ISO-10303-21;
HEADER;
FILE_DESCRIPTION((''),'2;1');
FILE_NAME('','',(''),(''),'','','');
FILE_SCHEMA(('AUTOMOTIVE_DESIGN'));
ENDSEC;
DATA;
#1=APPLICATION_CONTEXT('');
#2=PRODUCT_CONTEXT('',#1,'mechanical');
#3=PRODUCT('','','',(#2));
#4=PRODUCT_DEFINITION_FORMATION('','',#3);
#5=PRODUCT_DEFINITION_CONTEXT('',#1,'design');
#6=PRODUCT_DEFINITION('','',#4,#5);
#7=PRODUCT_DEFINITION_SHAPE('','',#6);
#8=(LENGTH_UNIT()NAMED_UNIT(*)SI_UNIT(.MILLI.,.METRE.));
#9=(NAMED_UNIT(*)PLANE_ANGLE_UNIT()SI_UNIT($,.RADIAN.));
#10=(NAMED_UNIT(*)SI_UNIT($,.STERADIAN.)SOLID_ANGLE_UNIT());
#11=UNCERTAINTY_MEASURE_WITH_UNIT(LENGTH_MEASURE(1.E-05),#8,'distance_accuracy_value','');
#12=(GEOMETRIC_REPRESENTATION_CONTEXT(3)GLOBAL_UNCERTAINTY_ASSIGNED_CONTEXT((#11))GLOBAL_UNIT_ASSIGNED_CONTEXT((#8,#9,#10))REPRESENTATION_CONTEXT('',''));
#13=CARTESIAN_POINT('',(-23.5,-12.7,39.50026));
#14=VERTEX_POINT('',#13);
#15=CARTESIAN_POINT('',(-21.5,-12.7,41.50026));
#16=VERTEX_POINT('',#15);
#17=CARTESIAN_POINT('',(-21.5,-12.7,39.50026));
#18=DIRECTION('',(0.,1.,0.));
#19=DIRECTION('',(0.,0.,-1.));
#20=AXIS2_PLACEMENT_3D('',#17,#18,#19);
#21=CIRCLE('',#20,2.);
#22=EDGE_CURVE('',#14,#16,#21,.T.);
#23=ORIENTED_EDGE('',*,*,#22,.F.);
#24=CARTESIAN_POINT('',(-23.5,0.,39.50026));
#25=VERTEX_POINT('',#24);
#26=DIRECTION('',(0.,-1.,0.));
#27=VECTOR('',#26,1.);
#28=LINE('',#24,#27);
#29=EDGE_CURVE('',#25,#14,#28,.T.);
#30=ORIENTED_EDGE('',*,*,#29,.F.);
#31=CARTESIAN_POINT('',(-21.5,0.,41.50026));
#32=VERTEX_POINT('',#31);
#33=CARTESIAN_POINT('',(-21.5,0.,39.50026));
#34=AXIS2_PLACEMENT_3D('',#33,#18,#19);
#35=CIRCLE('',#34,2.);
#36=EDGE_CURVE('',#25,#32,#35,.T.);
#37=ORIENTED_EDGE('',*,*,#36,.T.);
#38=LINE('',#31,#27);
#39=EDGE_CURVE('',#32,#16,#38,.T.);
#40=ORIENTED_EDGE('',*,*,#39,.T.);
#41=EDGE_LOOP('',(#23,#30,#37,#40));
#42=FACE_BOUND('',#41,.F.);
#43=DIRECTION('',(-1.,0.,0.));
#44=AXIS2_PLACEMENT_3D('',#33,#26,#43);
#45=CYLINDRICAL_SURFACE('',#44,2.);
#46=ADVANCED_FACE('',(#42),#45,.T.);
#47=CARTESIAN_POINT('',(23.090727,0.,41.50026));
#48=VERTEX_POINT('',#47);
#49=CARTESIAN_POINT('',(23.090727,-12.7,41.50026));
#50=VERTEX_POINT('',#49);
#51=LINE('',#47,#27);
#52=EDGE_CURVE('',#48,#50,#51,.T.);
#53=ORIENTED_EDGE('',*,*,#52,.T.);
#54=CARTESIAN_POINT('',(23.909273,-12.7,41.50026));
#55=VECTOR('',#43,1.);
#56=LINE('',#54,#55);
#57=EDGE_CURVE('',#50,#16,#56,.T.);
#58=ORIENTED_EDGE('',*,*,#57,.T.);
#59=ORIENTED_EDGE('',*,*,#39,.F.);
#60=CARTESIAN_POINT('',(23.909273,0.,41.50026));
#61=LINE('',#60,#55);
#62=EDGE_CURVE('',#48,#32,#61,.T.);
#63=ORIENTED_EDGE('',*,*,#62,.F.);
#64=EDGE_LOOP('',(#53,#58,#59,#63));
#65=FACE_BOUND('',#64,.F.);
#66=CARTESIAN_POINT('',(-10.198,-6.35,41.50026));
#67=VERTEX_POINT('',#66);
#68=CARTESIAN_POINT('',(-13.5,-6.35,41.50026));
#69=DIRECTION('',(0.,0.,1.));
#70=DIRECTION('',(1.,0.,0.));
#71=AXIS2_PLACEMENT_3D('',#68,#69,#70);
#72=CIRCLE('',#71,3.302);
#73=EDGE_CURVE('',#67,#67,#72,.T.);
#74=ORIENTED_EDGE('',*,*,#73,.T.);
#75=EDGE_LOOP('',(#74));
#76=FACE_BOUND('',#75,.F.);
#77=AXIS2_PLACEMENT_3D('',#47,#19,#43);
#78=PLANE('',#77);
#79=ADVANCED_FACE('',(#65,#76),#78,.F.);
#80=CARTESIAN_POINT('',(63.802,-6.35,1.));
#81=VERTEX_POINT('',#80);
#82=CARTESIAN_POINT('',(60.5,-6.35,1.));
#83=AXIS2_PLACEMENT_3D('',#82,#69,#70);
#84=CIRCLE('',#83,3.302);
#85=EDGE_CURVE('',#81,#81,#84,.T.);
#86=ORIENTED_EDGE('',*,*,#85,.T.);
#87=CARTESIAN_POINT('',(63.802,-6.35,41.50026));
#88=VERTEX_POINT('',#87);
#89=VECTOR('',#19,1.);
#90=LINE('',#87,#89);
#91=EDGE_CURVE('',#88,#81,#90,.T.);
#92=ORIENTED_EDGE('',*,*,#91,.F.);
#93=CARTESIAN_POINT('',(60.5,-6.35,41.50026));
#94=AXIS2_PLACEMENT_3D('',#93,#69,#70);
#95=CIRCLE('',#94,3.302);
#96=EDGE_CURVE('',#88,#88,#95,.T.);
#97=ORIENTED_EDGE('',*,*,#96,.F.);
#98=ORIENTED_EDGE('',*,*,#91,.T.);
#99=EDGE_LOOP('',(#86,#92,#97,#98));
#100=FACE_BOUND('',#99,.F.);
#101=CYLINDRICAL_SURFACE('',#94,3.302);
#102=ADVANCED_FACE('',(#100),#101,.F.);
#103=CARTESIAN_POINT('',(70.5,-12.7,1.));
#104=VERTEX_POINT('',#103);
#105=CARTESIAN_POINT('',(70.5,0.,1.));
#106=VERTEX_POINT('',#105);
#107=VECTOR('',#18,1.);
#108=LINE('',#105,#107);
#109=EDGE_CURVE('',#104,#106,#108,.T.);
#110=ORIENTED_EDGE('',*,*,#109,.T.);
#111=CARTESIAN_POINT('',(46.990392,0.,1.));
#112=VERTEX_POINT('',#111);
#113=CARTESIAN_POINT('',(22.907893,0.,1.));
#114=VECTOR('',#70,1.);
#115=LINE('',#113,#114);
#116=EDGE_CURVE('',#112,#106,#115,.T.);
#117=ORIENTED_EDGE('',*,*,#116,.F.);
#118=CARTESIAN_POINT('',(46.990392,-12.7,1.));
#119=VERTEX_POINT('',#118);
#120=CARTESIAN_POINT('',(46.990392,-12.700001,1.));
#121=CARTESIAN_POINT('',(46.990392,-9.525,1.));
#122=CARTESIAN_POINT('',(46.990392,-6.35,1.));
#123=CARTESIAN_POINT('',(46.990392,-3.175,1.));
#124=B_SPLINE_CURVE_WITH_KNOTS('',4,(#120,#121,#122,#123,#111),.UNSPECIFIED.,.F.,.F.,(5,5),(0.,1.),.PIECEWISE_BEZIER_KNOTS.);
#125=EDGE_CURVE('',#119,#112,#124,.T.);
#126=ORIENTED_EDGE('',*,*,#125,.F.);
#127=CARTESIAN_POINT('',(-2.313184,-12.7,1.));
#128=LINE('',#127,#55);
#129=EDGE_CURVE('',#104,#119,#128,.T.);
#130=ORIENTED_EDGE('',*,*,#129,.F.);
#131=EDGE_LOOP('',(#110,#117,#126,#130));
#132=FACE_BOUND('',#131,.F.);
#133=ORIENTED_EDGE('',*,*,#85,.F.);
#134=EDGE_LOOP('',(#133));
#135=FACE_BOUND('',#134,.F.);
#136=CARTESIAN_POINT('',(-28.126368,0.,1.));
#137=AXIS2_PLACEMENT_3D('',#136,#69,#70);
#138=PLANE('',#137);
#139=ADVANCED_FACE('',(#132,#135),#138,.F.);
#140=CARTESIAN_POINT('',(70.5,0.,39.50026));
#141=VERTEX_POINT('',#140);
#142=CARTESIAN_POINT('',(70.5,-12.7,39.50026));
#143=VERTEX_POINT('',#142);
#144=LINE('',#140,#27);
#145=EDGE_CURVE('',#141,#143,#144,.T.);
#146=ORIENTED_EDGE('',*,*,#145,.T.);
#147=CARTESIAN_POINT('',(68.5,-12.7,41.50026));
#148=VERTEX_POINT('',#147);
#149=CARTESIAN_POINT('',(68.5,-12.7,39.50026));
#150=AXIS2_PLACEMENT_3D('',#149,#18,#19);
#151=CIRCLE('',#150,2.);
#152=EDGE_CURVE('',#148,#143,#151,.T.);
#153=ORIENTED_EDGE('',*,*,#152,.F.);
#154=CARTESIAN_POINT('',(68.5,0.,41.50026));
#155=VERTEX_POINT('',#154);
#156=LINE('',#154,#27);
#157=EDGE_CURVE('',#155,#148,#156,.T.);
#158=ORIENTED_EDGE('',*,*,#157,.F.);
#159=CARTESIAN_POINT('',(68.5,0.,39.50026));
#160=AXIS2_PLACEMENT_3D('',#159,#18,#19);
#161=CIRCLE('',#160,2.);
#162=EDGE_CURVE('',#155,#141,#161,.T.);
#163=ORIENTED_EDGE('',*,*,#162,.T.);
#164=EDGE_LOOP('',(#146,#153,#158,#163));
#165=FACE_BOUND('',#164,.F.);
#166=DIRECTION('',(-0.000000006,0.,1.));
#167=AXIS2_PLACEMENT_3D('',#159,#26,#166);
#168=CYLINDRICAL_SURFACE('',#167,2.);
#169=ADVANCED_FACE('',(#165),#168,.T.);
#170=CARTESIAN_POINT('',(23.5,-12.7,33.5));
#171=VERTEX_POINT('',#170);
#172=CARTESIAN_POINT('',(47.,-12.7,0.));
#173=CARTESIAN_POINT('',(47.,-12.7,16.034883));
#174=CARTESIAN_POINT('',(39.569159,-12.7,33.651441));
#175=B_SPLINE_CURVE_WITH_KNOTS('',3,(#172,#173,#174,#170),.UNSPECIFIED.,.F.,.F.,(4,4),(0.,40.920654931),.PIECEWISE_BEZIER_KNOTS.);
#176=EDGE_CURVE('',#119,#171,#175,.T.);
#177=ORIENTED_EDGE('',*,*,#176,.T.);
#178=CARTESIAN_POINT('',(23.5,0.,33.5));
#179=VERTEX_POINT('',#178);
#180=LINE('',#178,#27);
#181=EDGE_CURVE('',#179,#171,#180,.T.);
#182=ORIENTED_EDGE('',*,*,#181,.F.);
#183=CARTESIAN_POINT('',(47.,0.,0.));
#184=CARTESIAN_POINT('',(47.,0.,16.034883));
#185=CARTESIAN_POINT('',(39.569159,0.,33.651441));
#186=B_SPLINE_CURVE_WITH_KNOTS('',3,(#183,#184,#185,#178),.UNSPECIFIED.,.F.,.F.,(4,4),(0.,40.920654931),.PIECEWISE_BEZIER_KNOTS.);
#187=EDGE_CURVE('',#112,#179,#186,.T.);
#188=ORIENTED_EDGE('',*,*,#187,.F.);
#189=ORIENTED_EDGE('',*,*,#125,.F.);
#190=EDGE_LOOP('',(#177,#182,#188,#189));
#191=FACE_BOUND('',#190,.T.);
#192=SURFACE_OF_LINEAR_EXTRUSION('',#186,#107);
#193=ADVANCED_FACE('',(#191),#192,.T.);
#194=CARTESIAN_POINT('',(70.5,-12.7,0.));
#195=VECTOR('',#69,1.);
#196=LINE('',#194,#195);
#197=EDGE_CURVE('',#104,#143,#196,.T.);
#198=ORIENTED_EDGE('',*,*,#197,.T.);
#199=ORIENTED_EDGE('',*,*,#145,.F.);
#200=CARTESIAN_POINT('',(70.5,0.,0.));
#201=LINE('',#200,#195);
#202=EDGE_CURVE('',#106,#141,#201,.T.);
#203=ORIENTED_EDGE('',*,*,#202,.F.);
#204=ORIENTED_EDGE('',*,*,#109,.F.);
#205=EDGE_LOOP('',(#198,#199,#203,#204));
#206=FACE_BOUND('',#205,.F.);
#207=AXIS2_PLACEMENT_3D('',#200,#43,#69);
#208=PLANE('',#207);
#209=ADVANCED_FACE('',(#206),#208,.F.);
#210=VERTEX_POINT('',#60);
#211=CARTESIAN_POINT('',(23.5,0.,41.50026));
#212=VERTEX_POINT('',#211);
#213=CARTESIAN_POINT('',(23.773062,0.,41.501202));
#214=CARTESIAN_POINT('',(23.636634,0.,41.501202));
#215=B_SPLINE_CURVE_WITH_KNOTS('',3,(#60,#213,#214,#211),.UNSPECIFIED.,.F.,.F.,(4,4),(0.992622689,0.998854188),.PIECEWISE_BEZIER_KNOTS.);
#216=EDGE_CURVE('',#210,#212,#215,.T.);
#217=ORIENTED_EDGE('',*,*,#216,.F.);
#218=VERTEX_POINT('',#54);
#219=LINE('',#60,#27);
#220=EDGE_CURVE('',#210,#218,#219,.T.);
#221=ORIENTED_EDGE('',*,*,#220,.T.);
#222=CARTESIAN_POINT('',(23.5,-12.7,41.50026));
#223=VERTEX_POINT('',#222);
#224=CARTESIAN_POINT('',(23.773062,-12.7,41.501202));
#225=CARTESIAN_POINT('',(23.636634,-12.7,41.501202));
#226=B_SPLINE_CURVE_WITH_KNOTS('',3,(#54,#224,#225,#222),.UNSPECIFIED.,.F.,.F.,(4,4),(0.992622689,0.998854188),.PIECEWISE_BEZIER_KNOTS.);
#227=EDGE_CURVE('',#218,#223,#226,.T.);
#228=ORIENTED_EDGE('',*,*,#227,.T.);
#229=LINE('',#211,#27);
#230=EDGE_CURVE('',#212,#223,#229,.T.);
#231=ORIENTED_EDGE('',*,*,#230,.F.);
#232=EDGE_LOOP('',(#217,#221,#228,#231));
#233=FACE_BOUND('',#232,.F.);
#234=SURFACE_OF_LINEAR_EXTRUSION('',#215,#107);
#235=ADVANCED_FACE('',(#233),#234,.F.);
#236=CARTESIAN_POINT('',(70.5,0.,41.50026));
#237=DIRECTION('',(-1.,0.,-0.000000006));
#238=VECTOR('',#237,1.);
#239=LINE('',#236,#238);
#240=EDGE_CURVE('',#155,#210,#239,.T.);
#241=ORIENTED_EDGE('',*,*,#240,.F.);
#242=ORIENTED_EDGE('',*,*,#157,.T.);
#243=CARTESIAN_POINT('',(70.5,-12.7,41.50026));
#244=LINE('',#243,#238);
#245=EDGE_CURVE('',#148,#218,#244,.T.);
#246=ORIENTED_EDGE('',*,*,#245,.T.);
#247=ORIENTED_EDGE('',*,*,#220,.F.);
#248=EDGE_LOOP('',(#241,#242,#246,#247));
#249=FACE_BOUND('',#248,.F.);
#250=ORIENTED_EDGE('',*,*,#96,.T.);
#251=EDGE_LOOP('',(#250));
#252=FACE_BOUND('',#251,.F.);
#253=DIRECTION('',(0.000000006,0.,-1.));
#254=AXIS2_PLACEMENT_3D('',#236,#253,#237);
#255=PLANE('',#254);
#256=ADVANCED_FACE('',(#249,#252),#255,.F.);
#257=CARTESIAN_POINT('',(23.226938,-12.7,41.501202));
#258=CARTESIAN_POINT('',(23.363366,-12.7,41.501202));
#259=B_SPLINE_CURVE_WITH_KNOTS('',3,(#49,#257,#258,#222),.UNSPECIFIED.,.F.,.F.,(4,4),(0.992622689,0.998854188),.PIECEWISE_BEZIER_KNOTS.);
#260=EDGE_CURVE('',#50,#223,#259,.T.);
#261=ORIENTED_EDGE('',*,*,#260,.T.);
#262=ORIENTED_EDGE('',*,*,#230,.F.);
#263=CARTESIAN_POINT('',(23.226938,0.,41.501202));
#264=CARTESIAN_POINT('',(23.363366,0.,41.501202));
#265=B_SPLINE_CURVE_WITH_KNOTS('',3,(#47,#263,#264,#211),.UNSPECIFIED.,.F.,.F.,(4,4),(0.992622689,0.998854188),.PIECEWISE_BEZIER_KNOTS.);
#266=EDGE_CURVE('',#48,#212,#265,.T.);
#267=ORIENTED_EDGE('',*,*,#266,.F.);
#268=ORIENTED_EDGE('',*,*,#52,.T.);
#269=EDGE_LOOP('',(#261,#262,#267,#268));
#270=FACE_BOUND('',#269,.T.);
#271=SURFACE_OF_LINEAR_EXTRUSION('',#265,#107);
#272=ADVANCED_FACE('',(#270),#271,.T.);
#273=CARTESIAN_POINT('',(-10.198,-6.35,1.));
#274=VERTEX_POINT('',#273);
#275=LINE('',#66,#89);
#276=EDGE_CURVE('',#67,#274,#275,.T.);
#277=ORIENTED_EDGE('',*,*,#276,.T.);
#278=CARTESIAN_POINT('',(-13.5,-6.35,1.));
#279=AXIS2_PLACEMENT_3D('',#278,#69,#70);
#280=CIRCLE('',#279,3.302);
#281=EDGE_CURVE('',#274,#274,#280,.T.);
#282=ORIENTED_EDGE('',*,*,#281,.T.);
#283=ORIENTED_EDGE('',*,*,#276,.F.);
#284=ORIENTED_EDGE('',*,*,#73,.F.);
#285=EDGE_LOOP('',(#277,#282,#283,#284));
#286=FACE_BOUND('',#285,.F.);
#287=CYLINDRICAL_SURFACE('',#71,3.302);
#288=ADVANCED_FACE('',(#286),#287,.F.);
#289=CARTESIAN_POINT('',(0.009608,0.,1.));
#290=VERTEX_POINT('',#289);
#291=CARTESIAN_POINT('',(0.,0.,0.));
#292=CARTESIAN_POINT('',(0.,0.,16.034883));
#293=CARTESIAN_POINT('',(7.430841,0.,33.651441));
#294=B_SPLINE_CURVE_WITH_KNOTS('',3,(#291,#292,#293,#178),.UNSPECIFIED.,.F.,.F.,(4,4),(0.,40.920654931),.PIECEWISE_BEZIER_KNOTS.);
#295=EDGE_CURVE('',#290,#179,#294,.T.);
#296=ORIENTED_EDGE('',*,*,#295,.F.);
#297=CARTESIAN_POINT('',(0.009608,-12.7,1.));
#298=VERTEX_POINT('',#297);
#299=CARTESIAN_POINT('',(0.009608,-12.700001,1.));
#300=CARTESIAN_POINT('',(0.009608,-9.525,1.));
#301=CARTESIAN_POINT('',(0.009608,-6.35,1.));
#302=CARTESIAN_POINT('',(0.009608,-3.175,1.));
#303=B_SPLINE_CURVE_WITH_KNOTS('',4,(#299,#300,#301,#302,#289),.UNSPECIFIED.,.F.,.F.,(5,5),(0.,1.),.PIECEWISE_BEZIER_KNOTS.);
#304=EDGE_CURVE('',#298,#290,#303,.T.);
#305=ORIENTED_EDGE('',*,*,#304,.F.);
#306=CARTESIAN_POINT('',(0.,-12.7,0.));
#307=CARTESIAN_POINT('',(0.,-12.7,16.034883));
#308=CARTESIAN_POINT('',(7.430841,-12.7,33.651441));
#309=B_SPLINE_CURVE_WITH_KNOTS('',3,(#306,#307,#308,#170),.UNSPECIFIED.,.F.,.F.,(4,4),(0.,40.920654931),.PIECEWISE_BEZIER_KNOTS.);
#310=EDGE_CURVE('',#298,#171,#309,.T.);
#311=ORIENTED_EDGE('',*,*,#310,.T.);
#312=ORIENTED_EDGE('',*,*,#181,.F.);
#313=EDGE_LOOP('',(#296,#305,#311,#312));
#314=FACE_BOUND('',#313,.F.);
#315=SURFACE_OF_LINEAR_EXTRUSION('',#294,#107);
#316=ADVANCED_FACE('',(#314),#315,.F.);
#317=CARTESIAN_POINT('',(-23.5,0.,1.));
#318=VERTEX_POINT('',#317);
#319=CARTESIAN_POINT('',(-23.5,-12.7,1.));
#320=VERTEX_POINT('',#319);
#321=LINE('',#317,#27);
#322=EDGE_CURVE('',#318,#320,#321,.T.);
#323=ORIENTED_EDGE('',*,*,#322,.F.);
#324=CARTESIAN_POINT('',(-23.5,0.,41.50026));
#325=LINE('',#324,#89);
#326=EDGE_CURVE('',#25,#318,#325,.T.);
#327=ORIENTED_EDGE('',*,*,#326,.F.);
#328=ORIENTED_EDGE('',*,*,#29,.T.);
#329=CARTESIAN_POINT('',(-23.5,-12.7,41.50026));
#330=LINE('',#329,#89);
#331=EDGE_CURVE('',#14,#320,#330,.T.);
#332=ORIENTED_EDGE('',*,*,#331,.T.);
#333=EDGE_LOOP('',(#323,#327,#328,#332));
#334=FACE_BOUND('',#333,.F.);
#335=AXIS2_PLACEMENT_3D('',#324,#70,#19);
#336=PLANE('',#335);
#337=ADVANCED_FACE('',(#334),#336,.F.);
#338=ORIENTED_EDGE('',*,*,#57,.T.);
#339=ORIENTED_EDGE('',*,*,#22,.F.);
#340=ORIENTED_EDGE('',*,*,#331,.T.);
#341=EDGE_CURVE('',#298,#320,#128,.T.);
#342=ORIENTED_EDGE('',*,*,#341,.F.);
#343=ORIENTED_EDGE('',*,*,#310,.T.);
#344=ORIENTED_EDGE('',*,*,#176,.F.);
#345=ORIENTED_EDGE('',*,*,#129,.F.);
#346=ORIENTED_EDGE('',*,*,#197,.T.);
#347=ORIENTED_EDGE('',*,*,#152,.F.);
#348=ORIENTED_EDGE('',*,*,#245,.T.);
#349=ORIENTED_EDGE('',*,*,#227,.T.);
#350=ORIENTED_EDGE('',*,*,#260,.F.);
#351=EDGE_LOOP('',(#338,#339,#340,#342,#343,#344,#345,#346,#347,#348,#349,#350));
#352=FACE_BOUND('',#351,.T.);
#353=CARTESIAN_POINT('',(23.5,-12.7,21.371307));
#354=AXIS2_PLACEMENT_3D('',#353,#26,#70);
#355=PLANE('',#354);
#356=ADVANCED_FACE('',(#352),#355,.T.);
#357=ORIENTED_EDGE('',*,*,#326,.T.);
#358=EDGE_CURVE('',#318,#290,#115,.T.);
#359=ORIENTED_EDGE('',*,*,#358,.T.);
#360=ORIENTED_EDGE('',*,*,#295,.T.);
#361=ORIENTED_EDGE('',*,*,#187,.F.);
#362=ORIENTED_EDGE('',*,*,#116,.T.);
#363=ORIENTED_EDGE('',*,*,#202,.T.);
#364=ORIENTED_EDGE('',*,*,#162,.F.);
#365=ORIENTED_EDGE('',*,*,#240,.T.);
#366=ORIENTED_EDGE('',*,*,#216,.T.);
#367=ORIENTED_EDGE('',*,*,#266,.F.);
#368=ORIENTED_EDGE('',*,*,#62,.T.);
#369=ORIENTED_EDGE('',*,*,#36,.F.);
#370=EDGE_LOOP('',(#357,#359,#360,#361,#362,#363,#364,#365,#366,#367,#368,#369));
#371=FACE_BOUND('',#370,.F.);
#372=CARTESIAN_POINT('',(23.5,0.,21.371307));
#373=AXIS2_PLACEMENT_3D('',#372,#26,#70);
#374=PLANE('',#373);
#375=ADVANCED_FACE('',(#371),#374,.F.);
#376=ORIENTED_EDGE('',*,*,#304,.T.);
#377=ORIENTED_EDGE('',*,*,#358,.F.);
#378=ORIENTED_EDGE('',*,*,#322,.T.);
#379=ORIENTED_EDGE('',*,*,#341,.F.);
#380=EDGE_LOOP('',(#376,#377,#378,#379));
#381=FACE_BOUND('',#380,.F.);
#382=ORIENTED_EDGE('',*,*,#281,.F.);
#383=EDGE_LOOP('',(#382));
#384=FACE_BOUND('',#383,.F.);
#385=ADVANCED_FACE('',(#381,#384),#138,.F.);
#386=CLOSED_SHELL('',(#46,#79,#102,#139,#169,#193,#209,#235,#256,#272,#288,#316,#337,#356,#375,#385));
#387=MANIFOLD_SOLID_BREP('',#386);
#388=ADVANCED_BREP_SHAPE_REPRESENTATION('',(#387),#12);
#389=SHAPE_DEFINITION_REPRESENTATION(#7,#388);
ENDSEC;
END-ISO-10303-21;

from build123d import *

# Parameters (mm, degrees)
F1_DEPTH = 12.7
F2_R     = 3.302
F3_DEPTH = 41.5002601562
F4_W     = 102.0685225816
F4_H     = 3.4845213629
F5_DEPTH = 25
F6_R     = 2


# Not quite as in the source:
# - ends of sketch curves that miss each other by under 0.0002 mm in the source are joined
# - the dataset's text gives a spline's control points without its knots; the knots are read off the source's solid


with BuildPart() as f1:
    # F0 (on Front) → F1 (new body)
    with BuildSketch(Plane.XZ):
        with BuildLine():
            Line((-8, 0), (0, 0))
            add(Edge.make_bspline(
                [(0, 0), (0, 16.0348825157), (7.430841215, 33.6514413357), (23.5, 33.5)],
                knots=[0, 0, 0, 0, 40.9206549312, 40.9206549312, 40.9206549312, 40.9206549312], degree=3))
            add(Edge.make_bspline(
                [(47, 0), (47, 16.0348825157), (39.569158785, 33.6514413357), (23.5, 33.5)],
                knots=[0, 0, 0, 0, 40.9206549312, 40.9206549312, 40.9206549312, 40.9206549312], degree=3))
            Line((47, 0), (55, 0))
            add(Edge.make_bspline(
                [(55, 0), (55, 2.3133051501), (54.8084752548, 5.6604865088), (54.3346414744, 8.9941225704), (54.1644875118, 10.0000161913)],
                knots=[0, 0, 0, 0, 0.125, 0.1792883855, 0.1792883855, 0.1792883855, 0.1792883855], degree=3))
            add(Edge.make_bspline(
                [(54.1644875118, 10.0000161913), (53.9428588652, 11.3102110198), (53.2041802455, 14.9199242801), (51.403557473, 20.6965522199), (48.312647429, 27.0635606249), (44.7757382973, 31.8590791464), (41.27501086, 35.2044913237), (38.3020149436, 37.39930019), (34.9881581098, 39.2038242784), (31.3670929719, 40.5407901401), (27.6491274865, 41.3170292606), (25.11417344, 41.4919330376), (23.9092731988, 41.5002601562)],
                knots=[0.1792883855, 0.1792883855, 0.1792883855, 0.1792883855, 0.25, 0.375, 0.5, 0.625, 0.6875, 0.75, 0.8125, 0.875, 0.9375, 0.9926226885, 0.9926226885, 0.9926226885, 0.9926226885], degree=3))
            Line((23.9092731988, 41.5002601562), (23.5, 41.5002601562))
            Line((23.5, 41.5002601562), (23.0907268012, 41.5002601562))
            add(Edge.make_bspline(
                [(-7.1644875118, 10.0000161913), (-6.9428588652, 11.3102110198), (-6.2041802455, 14.9199242801), (-4.403557473, 20.6965522199), (-1.312647429, 27.0635606249), (2.2242617027, 31.8590791464), (5.72498914, 35.2044913237), (8.6979850564, 37.39930019), (12.0118418902, 39.2038242784), (15.6329070281, 40.5407901401), (19.3508725135, 41.3170292606), (21.88582656, 41.4919330376), (23.0907268012, 41.5002601562)],
                knots=[0.1792883855, 0.1792883855, 0.1792883855, 0.1792883855, 0.25, 0.375, 0.5, 0.625, 0.6875, 0.75, 0.8125, 0.875, 0.9375, 0.9926226885, 0.9926226885, 0.9926226885, 0.9926226885], degree=3))
            add(Edge.make_bspline(
                [(-8, 0), (-8, 2.3133051501), (-7.8084752548, 5.6604865088), (-7.3346414744, 8.9941225704), (-7.1644875118, 10.0000161913)],
                knots=[0, 0, 0, 0, 0.125, 0.1792883855, 0.1792883855, 0.1792883855, 0.1792883855], degree=3))
        make_face()
        with BuildLine():
            Line((-23.5, 0), (-8, 0))
            add(Edge.make_bspline(
                [(-8, 0), (-8, 2.3133051501), (-7.8084752548, 5.6604865088), (-7.3346414744, 8.9941225704), (-7.1644875118, 10.0000161913)],
                knots=[0, 0, 0, 0, 0.125, 0.1792883855, 0.1792883855, 0.1792883855, 0.1792883855], degree=3))
            Line((-7.1644875118, 10.0000161913), (-23.5, 10))
            Line((-23.5, 10), (-23.5, 0))
        make_face()
        with BuildLine():
            Line((-23.5, 10), (-7.1643917939, 10))
            add(Edge.make_bspline(
                [(-7.1643917939, 10), (-6.9428588652, 11.3102110198), (-6.2041802455, 14.9199242801), (-4.403557473, 20.6965522199), (-1.312647429, 27.0635606249), (2.2242617027, 31.8590791464), (5.72498914, 35.2044913237), (8.6979850564, 37.39930019), (12.0118418902, 39.2038242784), (15.6329070281, 40.5407901401), (19.3508725135, 41.3170292606), (21.88582656, 41.4919330376), (23.0907268012, 41.5002601562)],
                knots=[0.1792883855, 0.1792883855, 0.1792883855, 0.1792883855, 0.25, 0.375, 0.5, 0.625, 0.6875, 0.75, 0.8125, 0.875, 0.9375, 0.9926226885, 0.9926226885, 0.9926226885, 0.9926226885], degree=3))
            Line((23.0907268012, 41.5002601562), (-23.5, 41.5002601562))
            Line((-23.5, 41.5002601562), (-23.5, 10))
        make_face()
        with BuildLine():
            add(Edge.make_bspline(
                [(55, 0), (55, 2.3133051501), (54.8084752548, 5.6604865088), (54.3346414744, 8.9941225704), (54.1644875118, 10.0000161913)],
                knots=[0, 0, 0, 0, 0.125, 0.1792883855, 0.1792883855, 0.1792883855, 0.1792883855], degree=3))
            Line((55, 0), (70.5, 0))
            Line((70.5, 0), (70.5, 10))
            Line((70.5, 10), (54.1644875118, 10.0000161913))
        make_face()
        with BuildLine():
            add(Edge.make_bspline(
                [(23.0907268012, 41.5002601562), (23.2269381476, 41.5012015188), (23.3633657228, 41.5012017791), (23.499999998, 41.5002598872)],
                knots=[0.9926226885, 0.9926226885, 0.9926226885, 0.9926226885, 0.9988541884, 0.9988541884, 0.9988541884, 0.9988541884], degree=3))
            Line((23.0907268012, 41.5002601562), (23.499999998, 41.5002598872))
        make_face()
        with BuildLine():
            add(Edge.make_bspline(
                [(54.1644875118, 10.0000161913), (53.9428588652, 11.3102110198), (53.2041802455, 14.9199242801), (51.403557473, 20.6965522199), (48.312647429, 27.0635606249), (44.7757382973, 31.8590791464), (41.27501086, 35.2044913237), (38.3020149436, 37.39930019), (34.9881581098, 39.2038242784), (31.3670929719, 40.5407901401), (27.6491274865, 41.3170292606), (25.11417344, 41.4919330376), (23.9092731988, 41.5002601562)],
                knots=[0.1792883855, 0.1792883855, 0.1792883855, 0.1792883855, 0.25, 0.375, 0.5, 0.625, 0.6875, 0.75, 0.8125, 0.875, 0.9375, 0.9926226885, 0.9926226885, 0.9926226885, 0.9926226885], degree=3))
            Line((54.1644875118, 10.0000161913), (70.5, 10))
            Line((70.5, 10), (70.5, 41.5002601562))
            Line((70.5, 41.5002601562), (23.9092731988, 41.5002601562))
        make_face()
        with BuildLine():
            add(Edge.make_bspline(
                [(23.9092731988, 41.5002601562), (23.7730618524, 41.5012015188), (23.6366342772, 41.5012017791), (23.500000002, 41.5002598872)],
                knots=[0.9926226885, 0.9926226885, 0.9926226885, 0.9926226885, 0.9988541884, 0.9988541884, 0.9988541884, 0.9988541884], degree=3))
            Line((23.500000002, 41.5002598872), (23.9092731988, 41.5002601562))
        make_face()
    extrude(amount=F1_DEPTH)

    # F2 (on face) → F3 (cut, through all)
    with BuildSketch(Plane.XY.offset(41.5002601562)):
        with Locations((-13.5000000019, -6.35)):
            Circle(F2_R)
        with Locations((60.4999999981, -6.35)):
            Circle(F2_R)
    extrude(amount=-F3_DEPTH, mode=Mode.SUBTRACT)

    # F4 (on Front) → F5 (cut)
    with BuildSketch(Plane.XZ):
        with Locations((22.9078933551, -0.7422606815)):
            Rectangle(F4_W, F4_H)
    extrude(amount=F5_DEPTH, mode=Mode.SUBTRACT)

    # F6
    f6_edges = [f1.edges().sort_by_distance(p)[0] for p in [
        (70.5, -6.35, 41.50026),
        (-23.5, -6.35, 41.50026),
    ]]
    fillet(f6_edges, radius=F6_R)


solid = f1.part
